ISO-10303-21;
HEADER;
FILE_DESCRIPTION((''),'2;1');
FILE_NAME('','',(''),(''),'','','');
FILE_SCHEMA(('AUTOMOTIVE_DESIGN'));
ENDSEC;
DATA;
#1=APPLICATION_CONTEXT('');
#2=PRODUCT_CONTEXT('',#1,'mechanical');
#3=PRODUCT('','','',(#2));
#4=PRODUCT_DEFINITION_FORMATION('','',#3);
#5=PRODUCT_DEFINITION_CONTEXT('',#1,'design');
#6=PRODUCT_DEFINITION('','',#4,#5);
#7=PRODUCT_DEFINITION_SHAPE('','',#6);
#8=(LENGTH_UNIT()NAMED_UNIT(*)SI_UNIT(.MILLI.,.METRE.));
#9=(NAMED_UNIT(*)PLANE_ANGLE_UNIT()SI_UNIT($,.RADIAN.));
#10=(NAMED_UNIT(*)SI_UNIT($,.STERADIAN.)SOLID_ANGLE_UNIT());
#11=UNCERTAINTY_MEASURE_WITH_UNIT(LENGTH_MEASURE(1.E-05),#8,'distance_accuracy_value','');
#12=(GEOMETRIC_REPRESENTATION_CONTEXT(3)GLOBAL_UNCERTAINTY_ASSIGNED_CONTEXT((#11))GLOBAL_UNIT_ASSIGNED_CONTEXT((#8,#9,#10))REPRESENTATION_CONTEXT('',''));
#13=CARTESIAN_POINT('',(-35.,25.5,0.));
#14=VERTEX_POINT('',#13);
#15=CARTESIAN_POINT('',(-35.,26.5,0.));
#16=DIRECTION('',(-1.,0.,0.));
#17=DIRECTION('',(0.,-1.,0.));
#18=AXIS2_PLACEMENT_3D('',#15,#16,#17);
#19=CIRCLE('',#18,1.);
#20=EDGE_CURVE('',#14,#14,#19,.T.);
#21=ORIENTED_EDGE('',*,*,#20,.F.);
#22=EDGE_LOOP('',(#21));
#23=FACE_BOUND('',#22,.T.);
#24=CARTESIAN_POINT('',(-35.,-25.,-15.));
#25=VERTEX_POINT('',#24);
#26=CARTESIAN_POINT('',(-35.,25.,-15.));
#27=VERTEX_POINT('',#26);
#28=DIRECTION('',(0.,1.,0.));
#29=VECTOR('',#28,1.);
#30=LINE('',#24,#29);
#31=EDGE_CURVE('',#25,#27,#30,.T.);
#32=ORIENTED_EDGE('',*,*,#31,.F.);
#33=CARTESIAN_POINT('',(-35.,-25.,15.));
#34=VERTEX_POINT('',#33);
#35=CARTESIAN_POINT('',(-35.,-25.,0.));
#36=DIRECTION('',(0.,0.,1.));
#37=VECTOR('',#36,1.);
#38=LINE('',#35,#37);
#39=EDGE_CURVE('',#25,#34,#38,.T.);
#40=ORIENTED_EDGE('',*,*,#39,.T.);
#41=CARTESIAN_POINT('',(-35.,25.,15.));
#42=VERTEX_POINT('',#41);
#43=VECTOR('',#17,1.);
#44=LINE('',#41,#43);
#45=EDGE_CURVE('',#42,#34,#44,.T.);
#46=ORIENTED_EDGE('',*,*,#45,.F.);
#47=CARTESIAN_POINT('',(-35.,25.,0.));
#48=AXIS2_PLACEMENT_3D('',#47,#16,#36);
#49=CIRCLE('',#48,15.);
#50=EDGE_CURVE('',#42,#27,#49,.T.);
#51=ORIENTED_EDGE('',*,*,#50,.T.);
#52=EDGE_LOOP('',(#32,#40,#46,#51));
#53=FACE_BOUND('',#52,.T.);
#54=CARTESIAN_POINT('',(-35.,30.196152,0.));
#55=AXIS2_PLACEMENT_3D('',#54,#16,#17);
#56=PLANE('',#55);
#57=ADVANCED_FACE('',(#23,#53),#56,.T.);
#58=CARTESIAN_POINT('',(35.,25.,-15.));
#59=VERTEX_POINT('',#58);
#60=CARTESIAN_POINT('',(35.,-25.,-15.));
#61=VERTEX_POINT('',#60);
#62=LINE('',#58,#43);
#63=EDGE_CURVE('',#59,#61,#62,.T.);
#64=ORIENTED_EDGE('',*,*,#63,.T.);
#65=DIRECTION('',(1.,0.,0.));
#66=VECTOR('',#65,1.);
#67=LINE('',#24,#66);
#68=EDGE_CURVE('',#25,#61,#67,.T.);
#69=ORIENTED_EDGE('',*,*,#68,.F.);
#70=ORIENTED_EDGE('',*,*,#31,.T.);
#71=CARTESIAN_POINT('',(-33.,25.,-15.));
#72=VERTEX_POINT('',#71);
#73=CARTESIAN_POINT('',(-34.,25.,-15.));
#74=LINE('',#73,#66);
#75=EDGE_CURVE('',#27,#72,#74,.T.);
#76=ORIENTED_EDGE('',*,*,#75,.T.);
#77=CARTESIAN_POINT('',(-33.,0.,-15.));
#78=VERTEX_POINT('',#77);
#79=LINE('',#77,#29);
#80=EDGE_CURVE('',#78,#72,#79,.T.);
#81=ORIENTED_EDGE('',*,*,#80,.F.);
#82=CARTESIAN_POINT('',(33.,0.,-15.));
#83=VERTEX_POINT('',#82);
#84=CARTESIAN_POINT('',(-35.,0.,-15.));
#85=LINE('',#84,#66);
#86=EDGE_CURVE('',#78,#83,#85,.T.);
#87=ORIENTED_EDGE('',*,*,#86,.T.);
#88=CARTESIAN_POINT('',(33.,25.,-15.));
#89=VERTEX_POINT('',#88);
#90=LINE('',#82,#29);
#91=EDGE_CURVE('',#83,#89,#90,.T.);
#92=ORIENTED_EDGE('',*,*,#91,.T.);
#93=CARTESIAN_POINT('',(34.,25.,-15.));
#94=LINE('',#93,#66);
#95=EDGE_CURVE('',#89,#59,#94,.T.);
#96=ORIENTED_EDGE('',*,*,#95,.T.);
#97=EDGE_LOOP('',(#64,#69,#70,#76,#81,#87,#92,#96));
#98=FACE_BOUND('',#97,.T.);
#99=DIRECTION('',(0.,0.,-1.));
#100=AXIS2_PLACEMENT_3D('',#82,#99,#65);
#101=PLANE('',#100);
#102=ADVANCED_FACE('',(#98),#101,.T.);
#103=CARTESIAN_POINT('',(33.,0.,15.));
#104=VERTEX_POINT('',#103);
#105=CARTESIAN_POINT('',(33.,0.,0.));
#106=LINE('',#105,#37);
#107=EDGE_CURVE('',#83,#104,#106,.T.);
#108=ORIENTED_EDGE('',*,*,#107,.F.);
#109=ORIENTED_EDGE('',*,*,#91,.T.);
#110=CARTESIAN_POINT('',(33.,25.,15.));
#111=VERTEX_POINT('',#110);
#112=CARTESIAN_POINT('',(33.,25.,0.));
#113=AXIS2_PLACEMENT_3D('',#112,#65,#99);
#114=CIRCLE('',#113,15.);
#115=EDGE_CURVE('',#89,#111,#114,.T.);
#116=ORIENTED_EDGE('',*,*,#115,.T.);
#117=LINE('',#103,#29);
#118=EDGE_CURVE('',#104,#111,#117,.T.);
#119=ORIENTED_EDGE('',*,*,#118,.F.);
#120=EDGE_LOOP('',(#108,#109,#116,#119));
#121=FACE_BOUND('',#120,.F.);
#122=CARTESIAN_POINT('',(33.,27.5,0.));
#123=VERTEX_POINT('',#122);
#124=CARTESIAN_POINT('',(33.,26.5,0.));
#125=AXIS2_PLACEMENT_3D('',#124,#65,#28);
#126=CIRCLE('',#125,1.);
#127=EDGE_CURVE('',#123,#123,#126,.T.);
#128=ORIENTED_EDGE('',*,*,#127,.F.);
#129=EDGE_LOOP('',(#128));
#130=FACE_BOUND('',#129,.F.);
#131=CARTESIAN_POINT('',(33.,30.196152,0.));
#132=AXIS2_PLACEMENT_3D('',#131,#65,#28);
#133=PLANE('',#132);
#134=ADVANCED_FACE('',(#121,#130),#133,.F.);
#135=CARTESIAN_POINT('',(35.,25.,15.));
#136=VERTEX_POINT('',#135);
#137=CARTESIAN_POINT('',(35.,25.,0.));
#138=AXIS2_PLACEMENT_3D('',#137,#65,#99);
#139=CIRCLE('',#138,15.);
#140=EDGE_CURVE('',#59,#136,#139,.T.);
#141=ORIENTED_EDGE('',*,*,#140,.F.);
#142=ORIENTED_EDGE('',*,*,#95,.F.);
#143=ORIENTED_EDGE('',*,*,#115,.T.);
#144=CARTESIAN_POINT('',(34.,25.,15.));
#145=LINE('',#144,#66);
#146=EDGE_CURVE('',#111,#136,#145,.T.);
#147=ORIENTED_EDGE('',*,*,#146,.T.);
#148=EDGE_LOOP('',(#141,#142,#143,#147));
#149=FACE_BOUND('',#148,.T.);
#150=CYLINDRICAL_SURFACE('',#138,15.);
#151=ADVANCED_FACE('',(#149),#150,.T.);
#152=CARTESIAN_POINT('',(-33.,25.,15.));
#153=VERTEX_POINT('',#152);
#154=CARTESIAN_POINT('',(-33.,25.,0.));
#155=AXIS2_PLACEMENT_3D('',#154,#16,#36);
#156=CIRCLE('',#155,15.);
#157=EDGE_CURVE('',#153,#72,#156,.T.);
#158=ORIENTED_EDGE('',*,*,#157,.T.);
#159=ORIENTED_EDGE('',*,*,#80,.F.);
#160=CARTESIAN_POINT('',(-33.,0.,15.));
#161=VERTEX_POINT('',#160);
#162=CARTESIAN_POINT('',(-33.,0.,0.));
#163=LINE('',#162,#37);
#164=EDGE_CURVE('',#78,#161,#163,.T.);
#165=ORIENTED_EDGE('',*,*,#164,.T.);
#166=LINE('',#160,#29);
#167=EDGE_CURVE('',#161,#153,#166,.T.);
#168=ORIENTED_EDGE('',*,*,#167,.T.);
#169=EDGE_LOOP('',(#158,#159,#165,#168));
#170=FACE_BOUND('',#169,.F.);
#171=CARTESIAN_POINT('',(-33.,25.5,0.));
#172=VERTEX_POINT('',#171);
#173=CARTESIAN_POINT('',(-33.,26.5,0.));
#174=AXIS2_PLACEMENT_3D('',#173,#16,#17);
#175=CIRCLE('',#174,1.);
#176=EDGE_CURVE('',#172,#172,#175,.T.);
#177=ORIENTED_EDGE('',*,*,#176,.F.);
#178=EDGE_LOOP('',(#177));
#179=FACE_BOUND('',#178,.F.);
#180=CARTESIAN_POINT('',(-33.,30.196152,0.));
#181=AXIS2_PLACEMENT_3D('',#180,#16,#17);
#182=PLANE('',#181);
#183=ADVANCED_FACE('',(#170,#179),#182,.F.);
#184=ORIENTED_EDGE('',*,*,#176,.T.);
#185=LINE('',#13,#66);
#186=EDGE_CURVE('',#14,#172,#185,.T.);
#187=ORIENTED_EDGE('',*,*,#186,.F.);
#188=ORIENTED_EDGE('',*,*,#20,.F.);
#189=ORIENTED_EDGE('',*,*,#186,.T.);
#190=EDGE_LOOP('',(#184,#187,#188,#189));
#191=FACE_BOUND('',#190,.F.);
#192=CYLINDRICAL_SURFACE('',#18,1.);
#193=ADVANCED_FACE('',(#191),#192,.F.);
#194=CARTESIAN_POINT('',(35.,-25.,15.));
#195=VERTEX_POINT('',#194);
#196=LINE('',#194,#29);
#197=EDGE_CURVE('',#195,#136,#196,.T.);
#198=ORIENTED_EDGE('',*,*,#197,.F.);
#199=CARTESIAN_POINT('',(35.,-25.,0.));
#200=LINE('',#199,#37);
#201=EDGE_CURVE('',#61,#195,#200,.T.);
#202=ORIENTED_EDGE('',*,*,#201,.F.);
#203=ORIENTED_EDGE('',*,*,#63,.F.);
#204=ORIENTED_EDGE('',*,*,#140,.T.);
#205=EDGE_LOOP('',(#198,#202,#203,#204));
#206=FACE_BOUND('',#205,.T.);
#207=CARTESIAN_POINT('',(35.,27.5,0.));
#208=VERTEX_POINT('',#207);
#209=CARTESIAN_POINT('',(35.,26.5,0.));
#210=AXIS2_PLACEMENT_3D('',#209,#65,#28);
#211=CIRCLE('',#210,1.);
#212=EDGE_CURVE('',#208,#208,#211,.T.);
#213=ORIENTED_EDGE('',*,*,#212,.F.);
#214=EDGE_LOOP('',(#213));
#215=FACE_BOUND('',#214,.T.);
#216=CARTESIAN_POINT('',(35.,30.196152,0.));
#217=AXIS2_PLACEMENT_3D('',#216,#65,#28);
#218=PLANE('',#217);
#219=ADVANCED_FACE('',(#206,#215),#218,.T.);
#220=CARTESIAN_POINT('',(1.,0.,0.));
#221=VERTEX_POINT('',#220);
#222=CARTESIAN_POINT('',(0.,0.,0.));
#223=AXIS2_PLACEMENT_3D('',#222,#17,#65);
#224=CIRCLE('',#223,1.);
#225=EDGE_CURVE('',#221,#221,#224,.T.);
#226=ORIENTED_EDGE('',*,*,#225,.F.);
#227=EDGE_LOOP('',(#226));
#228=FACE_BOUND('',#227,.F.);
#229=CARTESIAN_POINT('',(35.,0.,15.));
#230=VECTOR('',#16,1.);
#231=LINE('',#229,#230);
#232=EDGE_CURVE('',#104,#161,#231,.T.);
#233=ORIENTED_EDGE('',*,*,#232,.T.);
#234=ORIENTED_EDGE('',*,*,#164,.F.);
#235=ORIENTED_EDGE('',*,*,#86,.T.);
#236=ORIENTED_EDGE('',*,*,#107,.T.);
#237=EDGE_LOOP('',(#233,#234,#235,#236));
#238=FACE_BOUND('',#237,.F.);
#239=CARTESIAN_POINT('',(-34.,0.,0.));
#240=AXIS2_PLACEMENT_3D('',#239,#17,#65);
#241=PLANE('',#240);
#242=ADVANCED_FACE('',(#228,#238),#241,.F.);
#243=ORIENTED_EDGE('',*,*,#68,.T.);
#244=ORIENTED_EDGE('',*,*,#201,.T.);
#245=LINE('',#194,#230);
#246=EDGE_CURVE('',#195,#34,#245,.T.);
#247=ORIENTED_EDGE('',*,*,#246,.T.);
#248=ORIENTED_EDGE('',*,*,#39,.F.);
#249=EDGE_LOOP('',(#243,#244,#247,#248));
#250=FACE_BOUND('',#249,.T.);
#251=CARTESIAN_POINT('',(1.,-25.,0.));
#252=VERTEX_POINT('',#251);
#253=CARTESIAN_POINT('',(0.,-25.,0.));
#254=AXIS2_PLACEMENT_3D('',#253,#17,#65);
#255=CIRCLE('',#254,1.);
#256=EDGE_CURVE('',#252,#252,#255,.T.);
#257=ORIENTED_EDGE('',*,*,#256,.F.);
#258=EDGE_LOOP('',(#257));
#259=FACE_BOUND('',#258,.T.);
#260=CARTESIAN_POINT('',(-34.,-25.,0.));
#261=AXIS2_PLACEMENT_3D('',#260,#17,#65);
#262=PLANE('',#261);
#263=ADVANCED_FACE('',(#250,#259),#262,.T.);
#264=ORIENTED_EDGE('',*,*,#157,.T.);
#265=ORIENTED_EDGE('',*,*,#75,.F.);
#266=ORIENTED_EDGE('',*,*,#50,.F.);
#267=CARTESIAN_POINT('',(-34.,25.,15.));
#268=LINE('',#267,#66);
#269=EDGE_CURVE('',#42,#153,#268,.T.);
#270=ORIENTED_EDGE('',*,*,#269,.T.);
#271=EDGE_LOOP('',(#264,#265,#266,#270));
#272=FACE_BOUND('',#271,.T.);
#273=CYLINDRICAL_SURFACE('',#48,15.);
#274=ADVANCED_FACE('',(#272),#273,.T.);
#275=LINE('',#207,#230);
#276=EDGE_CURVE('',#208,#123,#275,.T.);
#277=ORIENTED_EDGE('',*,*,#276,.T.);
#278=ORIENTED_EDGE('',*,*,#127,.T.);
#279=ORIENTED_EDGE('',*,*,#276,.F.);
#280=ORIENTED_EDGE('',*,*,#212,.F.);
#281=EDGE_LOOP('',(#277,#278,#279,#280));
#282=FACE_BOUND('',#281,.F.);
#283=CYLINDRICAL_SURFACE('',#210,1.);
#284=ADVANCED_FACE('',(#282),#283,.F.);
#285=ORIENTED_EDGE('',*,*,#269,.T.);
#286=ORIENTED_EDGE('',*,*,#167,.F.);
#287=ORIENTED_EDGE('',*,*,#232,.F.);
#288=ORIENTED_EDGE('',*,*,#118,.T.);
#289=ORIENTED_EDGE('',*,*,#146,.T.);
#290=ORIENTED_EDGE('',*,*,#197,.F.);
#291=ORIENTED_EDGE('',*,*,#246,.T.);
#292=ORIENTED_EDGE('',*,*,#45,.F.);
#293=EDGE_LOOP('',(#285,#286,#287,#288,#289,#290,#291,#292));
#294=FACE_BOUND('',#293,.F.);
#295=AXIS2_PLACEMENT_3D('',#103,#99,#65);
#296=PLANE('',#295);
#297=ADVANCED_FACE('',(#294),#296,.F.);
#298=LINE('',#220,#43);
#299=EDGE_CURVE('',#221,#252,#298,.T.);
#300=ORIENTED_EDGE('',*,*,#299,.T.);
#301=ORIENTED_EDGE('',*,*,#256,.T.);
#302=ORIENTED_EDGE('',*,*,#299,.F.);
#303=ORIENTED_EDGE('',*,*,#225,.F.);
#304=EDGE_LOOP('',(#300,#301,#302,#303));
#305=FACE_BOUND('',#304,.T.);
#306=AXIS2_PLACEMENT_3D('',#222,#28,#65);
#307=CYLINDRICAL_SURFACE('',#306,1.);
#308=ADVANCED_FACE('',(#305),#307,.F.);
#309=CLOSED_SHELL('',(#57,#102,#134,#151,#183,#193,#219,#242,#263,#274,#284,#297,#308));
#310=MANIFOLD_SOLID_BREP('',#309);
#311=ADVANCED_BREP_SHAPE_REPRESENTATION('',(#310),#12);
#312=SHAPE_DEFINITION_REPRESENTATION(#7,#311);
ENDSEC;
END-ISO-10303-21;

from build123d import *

# Parameters (mm, degrees)
F0_W     = 2
F0_H     = 30
F0_W_2   = 66
F0_R     = 1
F1_DEPTH = 25
F2_DEPTH = 25
F3_R     = 1
F4_DEPTH = 2
F5_R     = 1
F6_DEPTH = 2


# Not quite as in the source:
# - a feature names something its author has since deleted; it is built from what else it names


with BuildPart() as f1:
    # F0 (on Front) → F1 (new body)
    with BuildSketch(Plane.XZ):
        with Locations((-34, 0)):
            Rectangle(F0_W, F0_H)
        with Locations((34, 0)):
            Rectangle(F0_W, F0_H)
        Rectangle(F0_W_2, F0_H)
        Circle(F0_R, mode=Mode.SUBTRACT)
    extrude(amount=F1_DEPTH)

    # F0 (on Front) → F2 (join)
    with BuildSketch(Plane.XZ):
        with Locations((34, 0)):
            Rectangle(F0_W, F0_H)
        with Locations((-34, 0)):
            Rectangle(F0_W, F0_H)
    extrude(amount=-F2_DEPTH)

    # F3 (on face) → F4 (join)
    with BuildSketch(Plane.YZ.offset(35)):
        with BuildLine():
            Line((25, 15), (25, -15))
            ThreePointArc((25, -15), (40, 0), (25, 15))
        make_face()
        with Locations((26.5, 0)):
            Circle(F3_R, mode=Mode.SUBTRACT)
    extrude(amount=-F4_DEPTH)

    # F5 (on face) → F6 (join)
    with BuildSketch(Plane(origin=(-35, 0, 0), x_dir=(0, -1, 0), z_dir=(-1, 0, 0))):
        with BuildLine():
            Line((-25, -15), (-25, 15))
            ThreePointArc((-25, 15), (-40, 0), (-25, -15))
        make_face()
        with Locations((-26.5, 0)):
            Circle(F5_R, mode=Mode.SUBTRACT)
    extrude(amount=-F6_DEPTH)


solid = f1.part
